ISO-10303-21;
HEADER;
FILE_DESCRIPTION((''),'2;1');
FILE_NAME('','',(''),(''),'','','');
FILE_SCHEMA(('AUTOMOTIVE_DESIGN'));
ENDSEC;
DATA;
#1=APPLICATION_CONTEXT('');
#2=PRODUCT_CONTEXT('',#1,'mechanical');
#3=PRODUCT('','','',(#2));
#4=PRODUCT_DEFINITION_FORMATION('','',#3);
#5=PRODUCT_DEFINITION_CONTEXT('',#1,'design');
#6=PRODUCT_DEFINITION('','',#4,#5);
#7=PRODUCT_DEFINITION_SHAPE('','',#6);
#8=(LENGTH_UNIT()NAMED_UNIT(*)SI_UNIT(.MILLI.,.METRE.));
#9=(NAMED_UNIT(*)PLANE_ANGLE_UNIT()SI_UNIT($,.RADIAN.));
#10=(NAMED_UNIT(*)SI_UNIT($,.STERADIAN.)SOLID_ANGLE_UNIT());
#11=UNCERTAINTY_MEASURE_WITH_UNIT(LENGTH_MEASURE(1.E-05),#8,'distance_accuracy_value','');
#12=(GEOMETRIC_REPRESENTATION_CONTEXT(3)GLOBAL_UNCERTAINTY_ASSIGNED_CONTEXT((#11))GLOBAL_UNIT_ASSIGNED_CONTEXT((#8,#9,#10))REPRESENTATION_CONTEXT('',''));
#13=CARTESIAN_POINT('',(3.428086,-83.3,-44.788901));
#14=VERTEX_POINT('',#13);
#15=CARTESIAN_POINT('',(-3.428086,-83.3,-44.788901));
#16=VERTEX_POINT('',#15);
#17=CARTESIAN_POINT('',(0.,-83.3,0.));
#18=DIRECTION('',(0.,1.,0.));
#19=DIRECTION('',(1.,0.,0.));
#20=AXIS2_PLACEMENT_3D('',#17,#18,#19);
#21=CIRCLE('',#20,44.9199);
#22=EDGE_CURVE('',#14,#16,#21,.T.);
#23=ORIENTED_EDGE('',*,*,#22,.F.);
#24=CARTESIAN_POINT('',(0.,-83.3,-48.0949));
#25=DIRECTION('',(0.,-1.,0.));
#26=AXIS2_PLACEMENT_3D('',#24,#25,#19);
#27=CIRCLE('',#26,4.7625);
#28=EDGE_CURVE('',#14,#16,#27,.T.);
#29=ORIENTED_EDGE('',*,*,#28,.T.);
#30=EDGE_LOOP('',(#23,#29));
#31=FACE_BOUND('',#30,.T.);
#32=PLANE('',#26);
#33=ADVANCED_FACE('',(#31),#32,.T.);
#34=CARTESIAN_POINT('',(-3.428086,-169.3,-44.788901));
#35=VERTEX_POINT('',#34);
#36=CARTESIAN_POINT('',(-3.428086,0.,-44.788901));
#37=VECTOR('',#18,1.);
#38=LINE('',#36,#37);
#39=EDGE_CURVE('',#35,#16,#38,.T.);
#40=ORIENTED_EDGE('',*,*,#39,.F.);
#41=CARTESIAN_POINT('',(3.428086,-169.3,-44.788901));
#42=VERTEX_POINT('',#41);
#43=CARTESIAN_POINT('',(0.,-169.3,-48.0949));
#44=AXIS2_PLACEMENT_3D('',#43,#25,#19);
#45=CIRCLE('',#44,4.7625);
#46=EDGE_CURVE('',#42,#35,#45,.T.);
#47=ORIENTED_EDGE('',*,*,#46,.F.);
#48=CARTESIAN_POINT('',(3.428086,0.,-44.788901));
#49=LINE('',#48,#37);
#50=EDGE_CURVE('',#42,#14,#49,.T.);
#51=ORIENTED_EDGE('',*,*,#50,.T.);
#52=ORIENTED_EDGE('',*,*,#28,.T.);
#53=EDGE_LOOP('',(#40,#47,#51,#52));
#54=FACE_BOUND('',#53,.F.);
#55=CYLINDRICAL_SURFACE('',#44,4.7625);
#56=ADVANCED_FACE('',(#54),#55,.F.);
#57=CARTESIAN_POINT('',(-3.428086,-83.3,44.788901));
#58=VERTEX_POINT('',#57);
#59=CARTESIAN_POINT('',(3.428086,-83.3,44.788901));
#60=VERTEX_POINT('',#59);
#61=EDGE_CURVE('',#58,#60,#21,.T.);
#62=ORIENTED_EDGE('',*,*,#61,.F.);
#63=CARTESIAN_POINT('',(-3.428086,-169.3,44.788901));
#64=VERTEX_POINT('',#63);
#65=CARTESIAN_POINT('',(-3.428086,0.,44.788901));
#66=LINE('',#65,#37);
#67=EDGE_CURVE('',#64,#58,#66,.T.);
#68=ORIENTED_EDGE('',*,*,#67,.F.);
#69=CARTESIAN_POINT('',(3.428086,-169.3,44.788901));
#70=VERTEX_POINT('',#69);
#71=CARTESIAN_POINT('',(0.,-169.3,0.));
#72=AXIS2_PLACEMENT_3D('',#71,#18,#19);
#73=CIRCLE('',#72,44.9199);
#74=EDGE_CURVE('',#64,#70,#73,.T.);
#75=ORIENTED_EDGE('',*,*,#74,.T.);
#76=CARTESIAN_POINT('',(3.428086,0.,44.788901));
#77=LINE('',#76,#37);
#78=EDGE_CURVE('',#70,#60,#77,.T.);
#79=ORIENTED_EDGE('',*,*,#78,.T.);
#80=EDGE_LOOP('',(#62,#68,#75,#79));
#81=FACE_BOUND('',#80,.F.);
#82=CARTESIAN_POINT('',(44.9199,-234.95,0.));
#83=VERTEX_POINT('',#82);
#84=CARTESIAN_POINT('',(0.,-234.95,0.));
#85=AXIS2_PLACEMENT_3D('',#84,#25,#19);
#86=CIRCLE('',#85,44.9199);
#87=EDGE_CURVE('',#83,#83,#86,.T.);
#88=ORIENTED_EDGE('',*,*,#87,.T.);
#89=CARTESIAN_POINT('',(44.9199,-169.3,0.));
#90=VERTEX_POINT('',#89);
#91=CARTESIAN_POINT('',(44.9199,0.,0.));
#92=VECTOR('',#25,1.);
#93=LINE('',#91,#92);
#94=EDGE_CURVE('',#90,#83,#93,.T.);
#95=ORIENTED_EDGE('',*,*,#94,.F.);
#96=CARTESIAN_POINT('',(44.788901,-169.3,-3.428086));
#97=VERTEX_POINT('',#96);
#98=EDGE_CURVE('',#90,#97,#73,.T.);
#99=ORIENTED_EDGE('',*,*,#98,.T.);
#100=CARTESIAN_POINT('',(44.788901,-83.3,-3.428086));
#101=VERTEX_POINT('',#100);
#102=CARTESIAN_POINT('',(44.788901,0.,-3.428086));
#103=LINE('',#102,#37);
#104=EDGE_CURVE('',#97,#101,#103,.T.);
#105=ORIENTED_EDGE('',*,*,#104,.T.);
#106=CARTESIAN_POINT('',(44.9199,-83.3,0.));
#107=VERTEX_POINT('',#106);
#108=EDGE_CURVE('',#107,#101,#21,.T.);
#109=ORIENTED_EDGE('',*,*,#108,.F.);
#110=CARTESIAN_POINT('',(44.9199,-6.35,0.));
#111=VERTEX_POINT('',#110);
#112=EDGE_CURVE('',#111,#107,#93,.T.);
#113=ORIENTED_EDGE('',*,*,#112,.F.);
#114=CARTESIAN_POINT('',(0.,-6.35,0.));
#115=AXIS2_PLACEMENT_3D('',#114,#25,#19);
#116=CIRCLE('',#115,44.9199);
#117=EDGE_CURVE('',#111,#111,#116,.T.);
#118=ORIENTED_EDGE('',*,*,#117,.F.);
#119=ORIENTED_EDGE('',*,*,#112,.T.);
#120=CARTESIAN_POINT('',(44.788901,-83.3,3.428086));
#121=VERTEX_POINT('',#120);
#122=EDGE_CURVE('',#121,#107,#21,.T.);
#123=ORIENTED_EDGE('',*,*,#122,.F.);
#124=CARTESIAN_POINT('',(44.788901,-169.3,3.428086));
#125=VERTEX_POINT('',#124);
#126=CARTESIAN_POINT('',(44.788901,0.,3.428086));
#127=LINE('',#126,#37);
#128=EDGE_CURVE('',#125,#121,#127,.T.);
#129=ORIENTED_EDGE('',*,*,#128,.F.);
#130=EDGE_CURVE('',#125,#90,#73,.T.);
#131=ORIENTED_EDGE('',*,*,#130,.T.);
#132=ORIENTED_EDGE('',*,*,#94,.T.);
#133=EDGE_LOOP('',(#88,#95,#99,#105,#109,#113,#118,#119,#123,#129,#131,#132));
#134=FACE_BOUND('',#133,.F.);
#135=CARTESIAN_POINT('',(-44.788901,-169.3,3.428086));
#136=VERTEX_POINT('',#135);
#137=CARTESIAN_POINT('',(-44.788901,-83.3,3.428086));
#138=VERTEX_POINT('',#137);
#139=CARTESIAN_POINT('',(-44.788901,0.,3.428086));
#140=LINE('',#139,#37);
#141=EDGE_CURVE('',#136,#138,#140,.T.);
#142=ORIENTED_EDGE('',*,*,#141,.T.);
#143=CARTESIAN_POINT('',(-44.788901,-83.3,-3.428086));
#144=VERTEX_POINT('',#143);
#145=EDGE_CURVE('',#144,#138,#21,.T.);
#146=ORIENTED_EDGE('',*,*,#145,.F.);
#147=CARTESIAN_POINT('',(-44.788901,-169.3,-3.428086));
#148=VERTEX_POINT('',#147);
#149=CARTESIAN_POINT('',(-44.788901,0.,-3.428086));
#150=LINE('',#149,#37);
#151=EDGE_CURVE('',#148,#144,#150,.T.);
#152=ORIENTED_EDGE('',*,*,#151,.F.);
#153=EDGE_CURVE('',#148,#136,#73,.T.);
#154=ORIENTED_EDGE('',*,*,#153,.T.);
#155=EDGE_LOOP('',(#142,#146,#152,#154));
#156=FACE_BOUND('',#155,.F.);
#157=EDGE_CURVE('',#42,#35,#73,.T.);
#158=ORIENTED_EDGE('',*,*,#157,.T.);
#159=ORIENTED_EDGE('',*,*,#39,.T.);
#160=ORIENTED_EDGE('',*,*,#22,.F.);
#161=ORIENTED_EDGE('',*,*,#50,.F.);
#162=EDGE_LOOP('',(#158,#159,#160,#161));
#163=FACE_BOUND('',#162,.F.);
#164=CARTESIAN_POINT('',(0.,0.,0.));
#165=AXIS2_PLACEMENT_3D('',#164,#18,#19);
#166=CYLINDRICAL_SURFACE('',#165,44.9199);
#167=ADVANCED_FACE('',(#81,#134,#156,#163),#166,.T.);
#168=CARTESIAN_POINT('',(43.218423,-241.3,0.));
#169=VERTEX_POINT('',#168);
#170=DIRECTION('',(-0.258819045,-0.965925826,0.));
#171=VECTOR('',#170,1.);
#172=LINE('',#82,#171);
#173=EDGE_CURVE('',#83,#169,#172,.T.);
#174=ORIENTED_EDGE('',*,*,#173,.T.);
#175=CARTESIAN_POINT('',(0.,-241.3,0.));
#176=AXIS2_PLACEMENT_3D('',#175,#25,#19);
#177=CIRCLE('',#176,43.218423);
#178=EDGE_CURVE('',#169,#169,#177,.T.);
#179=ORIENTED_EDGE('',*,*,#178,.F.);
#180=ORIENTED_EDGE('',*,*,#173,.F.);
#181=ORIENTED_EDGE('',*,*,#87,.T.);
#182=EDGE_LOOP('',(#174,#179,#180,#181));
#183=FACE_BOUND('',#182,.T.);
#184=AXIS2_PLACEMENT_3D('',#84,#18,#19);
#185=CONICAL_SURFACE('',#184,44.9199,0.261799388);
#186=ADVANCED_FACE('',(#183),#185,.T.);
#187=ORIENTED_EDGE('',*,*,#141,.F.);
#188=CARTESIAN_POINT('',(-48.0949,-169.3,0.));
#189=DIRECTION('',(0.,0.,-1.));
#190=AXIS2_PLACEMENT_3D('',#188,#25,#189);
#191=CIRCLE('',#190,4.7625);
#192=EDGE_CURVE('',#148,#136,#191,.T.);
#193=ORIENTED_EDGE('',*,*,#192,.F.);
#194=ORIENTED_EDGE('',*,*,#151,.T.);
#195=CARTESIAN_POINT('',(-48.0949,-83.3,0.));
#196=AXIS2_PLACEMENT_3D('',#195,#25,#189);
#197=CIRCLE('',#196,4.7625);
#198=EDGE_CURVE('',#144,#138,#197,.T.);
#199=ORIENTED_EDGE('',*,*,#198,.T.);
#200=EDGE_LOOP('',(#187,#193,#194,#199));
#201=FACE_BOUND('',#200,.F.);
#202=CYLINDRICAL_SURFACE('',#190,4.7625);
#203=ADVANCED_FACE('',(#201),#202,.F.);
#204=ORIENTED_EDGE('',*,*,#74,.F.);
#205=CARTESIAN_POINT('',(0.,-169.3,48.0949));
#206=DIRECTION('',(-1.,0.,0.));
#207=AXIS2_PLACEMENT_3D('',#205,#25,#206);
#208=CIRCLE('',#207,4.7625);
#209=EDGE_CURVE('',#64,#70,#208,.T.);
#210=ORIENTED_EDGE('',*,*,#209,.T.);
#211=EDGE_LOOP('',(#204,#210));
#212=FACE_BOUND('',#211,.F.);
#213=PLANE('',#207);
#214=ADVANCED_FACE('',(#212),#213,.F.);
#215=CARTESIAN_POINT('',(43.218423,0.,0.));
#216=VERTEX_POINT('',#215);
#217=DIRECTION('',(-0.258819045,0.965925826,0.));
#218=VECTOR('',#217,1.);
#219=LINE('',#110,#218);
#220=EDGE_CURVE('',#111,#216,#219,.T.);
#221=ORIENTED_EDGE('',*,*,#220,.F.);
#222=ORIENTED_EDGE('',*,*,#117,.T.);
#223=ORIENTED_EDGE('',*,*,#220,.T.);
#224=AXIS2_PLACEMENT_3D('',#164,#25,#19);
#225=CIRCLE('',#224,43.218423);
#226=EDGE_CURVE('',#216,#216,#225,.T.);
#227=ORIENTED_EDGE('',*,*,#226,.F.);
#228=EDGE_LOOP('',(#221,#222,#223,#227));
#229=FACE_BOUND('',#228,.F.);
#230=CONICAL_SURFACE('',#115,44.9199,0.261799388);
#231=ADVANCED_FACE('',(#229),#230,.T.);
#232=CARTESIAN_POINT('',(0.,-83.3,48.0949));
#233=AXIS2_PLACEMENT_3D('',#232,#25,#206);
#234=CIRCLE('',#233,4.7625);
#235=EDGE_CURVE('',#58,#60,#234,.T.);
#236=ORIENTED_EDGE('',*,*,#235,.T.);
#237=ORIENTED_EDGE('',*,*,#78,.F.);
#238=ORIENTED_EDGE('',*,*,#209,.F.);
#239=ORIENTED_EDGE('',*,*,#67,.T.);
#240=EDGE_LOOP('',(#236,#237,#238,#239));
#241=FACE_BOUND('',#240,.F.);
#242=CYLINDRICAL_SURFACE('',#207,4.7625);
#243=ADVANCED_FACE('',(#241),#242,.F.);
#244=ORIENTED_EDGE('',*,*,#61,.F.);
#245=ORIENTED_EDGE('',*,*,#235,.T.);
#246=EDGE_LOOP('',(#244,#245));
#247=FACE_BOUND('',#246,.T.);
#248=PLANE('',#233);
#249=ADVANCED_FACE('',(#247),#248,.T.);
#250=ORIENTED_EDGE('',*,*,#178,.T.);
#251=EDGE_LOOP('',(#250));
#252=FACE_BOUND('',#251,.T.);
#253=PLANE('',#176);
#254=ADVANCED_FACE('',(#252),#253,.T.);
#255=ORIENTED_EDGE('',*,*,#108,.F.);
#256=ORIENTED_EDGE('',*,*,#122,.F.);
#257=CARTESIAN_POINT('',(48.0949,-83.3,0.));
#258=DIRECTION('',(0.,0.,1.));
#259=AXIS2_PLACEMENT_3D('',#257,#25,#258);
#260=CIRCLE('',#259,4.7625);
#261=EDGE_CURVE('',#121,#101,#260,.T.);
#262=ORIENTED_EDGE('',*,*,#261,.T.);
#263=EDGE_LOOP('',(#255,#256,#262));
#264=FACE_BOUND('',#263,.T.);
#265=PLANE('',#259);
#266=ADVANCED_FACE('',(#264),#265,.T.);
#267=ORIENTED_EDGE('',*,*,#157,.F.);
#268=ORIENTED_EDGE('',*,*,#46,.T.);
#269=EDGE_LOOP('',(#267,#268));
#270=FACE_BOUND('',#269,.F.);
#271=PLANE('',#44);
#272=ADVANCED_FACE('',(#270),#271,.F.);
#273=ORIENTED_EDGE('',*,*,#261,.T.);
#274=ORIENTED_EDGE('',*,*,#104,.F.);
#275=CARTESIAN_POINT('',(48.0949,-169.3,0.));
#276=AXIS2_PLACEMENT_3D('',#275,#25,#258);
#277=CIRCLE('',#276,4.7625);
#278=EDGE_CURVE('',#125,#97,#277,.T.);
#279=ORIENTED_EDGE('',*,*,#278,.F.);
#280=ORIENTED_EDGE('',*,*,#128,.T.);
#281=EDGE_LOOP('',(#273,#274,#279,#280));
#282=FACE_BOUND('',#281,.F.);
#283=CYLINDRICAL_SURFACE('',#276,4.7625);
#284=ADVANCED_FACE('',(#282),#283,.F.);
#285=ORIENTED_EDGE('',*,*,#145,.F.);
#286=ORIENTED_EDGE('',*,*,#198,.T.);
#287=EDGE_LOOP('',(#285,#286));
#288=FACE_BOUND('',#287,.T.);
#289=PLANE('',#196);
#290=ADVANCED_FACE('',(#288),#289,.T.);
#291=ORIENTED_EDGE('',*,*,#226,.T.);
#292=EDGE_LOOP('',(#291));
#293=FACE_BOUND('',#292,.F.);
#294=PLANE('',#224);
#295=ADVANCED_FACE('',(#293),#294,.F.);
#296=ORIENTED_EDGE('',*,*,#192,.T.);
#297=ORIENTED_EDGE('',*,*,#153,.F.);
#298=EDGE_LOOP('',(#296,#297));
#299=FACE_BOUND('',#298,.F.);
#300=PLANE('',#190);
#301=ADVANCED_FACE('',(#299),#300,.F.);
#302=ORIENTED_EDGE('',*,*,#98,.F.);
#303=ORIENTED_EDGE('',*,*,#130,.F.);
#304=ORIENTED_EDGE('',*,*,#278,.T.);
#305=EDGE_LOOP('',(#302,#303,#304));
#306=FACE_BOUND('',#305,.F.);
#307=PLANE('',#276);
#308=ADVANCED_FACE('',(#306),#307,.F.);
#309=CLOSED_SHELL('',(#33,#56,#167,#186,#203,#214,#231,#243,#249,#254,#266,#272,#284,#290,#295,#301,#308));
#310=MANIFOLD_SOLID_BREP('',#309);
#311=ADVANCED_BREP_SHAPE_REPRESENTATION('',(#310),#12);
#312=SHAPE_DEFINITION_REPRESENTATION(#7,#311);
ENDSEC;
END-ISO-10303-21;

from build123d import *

# Parameters (mm, degrees)
F0_R            = 44.9199
F1_DEPTH        = 241.3
F2_SIZE2        = 1.7014773719
F2_SIZE         = 6.35
F4_R            = 4.7625
F5_DEPTH        = 86
F5_COPIES_COUNT = 4


# Not quite as in the source:
# - a pattern or mirror of a feature is missing from the dataset's text; its kind, count and spacing are read off the source's solid


with BuildPart() as f1:
    # F0 (on Front) → F1 (new body)
    with BuildSketch(Plane.XZ):
        Circle(F0_R)
    extrude(amount=F1_DEPTH)

    # F2
    f2_edges = [f1.edges().sort_by_distance(p)[0] for p in [
        (-44.9199, -241.3, 0),
        (-44.9199, 0, 0),
    ]]
    f2_side = f1.faces().sort_by_distance((-44.9199, -120.65, 0))[0]
    chamfer(f2_edges, length=F2_SIZE, length2=F2_SIZE2, reference=f2_side)

    # F4 (on offset) → F5 (cut)
    with BuildSketch(Plane.XZ.offset(169.3)):
        with Locations((0, -48.0949)):
            Circle(F4_R)
    f5 = extrude(amount=-F5_DEPTH, mode=Mode.SUBTRACT)

    # F5_copies: F5 ×4 about axis
    f5_copies_axis = Axis((0, 0, 0), (0, 1, 0))
    for i in range(1, F5_COPIES_COUNT):
        add(f5.rotate(f5_copies_axis, i * 360 / F5_COPIES_COUNT), mode=Mode.SUBTRACT)


solid = f1.part
